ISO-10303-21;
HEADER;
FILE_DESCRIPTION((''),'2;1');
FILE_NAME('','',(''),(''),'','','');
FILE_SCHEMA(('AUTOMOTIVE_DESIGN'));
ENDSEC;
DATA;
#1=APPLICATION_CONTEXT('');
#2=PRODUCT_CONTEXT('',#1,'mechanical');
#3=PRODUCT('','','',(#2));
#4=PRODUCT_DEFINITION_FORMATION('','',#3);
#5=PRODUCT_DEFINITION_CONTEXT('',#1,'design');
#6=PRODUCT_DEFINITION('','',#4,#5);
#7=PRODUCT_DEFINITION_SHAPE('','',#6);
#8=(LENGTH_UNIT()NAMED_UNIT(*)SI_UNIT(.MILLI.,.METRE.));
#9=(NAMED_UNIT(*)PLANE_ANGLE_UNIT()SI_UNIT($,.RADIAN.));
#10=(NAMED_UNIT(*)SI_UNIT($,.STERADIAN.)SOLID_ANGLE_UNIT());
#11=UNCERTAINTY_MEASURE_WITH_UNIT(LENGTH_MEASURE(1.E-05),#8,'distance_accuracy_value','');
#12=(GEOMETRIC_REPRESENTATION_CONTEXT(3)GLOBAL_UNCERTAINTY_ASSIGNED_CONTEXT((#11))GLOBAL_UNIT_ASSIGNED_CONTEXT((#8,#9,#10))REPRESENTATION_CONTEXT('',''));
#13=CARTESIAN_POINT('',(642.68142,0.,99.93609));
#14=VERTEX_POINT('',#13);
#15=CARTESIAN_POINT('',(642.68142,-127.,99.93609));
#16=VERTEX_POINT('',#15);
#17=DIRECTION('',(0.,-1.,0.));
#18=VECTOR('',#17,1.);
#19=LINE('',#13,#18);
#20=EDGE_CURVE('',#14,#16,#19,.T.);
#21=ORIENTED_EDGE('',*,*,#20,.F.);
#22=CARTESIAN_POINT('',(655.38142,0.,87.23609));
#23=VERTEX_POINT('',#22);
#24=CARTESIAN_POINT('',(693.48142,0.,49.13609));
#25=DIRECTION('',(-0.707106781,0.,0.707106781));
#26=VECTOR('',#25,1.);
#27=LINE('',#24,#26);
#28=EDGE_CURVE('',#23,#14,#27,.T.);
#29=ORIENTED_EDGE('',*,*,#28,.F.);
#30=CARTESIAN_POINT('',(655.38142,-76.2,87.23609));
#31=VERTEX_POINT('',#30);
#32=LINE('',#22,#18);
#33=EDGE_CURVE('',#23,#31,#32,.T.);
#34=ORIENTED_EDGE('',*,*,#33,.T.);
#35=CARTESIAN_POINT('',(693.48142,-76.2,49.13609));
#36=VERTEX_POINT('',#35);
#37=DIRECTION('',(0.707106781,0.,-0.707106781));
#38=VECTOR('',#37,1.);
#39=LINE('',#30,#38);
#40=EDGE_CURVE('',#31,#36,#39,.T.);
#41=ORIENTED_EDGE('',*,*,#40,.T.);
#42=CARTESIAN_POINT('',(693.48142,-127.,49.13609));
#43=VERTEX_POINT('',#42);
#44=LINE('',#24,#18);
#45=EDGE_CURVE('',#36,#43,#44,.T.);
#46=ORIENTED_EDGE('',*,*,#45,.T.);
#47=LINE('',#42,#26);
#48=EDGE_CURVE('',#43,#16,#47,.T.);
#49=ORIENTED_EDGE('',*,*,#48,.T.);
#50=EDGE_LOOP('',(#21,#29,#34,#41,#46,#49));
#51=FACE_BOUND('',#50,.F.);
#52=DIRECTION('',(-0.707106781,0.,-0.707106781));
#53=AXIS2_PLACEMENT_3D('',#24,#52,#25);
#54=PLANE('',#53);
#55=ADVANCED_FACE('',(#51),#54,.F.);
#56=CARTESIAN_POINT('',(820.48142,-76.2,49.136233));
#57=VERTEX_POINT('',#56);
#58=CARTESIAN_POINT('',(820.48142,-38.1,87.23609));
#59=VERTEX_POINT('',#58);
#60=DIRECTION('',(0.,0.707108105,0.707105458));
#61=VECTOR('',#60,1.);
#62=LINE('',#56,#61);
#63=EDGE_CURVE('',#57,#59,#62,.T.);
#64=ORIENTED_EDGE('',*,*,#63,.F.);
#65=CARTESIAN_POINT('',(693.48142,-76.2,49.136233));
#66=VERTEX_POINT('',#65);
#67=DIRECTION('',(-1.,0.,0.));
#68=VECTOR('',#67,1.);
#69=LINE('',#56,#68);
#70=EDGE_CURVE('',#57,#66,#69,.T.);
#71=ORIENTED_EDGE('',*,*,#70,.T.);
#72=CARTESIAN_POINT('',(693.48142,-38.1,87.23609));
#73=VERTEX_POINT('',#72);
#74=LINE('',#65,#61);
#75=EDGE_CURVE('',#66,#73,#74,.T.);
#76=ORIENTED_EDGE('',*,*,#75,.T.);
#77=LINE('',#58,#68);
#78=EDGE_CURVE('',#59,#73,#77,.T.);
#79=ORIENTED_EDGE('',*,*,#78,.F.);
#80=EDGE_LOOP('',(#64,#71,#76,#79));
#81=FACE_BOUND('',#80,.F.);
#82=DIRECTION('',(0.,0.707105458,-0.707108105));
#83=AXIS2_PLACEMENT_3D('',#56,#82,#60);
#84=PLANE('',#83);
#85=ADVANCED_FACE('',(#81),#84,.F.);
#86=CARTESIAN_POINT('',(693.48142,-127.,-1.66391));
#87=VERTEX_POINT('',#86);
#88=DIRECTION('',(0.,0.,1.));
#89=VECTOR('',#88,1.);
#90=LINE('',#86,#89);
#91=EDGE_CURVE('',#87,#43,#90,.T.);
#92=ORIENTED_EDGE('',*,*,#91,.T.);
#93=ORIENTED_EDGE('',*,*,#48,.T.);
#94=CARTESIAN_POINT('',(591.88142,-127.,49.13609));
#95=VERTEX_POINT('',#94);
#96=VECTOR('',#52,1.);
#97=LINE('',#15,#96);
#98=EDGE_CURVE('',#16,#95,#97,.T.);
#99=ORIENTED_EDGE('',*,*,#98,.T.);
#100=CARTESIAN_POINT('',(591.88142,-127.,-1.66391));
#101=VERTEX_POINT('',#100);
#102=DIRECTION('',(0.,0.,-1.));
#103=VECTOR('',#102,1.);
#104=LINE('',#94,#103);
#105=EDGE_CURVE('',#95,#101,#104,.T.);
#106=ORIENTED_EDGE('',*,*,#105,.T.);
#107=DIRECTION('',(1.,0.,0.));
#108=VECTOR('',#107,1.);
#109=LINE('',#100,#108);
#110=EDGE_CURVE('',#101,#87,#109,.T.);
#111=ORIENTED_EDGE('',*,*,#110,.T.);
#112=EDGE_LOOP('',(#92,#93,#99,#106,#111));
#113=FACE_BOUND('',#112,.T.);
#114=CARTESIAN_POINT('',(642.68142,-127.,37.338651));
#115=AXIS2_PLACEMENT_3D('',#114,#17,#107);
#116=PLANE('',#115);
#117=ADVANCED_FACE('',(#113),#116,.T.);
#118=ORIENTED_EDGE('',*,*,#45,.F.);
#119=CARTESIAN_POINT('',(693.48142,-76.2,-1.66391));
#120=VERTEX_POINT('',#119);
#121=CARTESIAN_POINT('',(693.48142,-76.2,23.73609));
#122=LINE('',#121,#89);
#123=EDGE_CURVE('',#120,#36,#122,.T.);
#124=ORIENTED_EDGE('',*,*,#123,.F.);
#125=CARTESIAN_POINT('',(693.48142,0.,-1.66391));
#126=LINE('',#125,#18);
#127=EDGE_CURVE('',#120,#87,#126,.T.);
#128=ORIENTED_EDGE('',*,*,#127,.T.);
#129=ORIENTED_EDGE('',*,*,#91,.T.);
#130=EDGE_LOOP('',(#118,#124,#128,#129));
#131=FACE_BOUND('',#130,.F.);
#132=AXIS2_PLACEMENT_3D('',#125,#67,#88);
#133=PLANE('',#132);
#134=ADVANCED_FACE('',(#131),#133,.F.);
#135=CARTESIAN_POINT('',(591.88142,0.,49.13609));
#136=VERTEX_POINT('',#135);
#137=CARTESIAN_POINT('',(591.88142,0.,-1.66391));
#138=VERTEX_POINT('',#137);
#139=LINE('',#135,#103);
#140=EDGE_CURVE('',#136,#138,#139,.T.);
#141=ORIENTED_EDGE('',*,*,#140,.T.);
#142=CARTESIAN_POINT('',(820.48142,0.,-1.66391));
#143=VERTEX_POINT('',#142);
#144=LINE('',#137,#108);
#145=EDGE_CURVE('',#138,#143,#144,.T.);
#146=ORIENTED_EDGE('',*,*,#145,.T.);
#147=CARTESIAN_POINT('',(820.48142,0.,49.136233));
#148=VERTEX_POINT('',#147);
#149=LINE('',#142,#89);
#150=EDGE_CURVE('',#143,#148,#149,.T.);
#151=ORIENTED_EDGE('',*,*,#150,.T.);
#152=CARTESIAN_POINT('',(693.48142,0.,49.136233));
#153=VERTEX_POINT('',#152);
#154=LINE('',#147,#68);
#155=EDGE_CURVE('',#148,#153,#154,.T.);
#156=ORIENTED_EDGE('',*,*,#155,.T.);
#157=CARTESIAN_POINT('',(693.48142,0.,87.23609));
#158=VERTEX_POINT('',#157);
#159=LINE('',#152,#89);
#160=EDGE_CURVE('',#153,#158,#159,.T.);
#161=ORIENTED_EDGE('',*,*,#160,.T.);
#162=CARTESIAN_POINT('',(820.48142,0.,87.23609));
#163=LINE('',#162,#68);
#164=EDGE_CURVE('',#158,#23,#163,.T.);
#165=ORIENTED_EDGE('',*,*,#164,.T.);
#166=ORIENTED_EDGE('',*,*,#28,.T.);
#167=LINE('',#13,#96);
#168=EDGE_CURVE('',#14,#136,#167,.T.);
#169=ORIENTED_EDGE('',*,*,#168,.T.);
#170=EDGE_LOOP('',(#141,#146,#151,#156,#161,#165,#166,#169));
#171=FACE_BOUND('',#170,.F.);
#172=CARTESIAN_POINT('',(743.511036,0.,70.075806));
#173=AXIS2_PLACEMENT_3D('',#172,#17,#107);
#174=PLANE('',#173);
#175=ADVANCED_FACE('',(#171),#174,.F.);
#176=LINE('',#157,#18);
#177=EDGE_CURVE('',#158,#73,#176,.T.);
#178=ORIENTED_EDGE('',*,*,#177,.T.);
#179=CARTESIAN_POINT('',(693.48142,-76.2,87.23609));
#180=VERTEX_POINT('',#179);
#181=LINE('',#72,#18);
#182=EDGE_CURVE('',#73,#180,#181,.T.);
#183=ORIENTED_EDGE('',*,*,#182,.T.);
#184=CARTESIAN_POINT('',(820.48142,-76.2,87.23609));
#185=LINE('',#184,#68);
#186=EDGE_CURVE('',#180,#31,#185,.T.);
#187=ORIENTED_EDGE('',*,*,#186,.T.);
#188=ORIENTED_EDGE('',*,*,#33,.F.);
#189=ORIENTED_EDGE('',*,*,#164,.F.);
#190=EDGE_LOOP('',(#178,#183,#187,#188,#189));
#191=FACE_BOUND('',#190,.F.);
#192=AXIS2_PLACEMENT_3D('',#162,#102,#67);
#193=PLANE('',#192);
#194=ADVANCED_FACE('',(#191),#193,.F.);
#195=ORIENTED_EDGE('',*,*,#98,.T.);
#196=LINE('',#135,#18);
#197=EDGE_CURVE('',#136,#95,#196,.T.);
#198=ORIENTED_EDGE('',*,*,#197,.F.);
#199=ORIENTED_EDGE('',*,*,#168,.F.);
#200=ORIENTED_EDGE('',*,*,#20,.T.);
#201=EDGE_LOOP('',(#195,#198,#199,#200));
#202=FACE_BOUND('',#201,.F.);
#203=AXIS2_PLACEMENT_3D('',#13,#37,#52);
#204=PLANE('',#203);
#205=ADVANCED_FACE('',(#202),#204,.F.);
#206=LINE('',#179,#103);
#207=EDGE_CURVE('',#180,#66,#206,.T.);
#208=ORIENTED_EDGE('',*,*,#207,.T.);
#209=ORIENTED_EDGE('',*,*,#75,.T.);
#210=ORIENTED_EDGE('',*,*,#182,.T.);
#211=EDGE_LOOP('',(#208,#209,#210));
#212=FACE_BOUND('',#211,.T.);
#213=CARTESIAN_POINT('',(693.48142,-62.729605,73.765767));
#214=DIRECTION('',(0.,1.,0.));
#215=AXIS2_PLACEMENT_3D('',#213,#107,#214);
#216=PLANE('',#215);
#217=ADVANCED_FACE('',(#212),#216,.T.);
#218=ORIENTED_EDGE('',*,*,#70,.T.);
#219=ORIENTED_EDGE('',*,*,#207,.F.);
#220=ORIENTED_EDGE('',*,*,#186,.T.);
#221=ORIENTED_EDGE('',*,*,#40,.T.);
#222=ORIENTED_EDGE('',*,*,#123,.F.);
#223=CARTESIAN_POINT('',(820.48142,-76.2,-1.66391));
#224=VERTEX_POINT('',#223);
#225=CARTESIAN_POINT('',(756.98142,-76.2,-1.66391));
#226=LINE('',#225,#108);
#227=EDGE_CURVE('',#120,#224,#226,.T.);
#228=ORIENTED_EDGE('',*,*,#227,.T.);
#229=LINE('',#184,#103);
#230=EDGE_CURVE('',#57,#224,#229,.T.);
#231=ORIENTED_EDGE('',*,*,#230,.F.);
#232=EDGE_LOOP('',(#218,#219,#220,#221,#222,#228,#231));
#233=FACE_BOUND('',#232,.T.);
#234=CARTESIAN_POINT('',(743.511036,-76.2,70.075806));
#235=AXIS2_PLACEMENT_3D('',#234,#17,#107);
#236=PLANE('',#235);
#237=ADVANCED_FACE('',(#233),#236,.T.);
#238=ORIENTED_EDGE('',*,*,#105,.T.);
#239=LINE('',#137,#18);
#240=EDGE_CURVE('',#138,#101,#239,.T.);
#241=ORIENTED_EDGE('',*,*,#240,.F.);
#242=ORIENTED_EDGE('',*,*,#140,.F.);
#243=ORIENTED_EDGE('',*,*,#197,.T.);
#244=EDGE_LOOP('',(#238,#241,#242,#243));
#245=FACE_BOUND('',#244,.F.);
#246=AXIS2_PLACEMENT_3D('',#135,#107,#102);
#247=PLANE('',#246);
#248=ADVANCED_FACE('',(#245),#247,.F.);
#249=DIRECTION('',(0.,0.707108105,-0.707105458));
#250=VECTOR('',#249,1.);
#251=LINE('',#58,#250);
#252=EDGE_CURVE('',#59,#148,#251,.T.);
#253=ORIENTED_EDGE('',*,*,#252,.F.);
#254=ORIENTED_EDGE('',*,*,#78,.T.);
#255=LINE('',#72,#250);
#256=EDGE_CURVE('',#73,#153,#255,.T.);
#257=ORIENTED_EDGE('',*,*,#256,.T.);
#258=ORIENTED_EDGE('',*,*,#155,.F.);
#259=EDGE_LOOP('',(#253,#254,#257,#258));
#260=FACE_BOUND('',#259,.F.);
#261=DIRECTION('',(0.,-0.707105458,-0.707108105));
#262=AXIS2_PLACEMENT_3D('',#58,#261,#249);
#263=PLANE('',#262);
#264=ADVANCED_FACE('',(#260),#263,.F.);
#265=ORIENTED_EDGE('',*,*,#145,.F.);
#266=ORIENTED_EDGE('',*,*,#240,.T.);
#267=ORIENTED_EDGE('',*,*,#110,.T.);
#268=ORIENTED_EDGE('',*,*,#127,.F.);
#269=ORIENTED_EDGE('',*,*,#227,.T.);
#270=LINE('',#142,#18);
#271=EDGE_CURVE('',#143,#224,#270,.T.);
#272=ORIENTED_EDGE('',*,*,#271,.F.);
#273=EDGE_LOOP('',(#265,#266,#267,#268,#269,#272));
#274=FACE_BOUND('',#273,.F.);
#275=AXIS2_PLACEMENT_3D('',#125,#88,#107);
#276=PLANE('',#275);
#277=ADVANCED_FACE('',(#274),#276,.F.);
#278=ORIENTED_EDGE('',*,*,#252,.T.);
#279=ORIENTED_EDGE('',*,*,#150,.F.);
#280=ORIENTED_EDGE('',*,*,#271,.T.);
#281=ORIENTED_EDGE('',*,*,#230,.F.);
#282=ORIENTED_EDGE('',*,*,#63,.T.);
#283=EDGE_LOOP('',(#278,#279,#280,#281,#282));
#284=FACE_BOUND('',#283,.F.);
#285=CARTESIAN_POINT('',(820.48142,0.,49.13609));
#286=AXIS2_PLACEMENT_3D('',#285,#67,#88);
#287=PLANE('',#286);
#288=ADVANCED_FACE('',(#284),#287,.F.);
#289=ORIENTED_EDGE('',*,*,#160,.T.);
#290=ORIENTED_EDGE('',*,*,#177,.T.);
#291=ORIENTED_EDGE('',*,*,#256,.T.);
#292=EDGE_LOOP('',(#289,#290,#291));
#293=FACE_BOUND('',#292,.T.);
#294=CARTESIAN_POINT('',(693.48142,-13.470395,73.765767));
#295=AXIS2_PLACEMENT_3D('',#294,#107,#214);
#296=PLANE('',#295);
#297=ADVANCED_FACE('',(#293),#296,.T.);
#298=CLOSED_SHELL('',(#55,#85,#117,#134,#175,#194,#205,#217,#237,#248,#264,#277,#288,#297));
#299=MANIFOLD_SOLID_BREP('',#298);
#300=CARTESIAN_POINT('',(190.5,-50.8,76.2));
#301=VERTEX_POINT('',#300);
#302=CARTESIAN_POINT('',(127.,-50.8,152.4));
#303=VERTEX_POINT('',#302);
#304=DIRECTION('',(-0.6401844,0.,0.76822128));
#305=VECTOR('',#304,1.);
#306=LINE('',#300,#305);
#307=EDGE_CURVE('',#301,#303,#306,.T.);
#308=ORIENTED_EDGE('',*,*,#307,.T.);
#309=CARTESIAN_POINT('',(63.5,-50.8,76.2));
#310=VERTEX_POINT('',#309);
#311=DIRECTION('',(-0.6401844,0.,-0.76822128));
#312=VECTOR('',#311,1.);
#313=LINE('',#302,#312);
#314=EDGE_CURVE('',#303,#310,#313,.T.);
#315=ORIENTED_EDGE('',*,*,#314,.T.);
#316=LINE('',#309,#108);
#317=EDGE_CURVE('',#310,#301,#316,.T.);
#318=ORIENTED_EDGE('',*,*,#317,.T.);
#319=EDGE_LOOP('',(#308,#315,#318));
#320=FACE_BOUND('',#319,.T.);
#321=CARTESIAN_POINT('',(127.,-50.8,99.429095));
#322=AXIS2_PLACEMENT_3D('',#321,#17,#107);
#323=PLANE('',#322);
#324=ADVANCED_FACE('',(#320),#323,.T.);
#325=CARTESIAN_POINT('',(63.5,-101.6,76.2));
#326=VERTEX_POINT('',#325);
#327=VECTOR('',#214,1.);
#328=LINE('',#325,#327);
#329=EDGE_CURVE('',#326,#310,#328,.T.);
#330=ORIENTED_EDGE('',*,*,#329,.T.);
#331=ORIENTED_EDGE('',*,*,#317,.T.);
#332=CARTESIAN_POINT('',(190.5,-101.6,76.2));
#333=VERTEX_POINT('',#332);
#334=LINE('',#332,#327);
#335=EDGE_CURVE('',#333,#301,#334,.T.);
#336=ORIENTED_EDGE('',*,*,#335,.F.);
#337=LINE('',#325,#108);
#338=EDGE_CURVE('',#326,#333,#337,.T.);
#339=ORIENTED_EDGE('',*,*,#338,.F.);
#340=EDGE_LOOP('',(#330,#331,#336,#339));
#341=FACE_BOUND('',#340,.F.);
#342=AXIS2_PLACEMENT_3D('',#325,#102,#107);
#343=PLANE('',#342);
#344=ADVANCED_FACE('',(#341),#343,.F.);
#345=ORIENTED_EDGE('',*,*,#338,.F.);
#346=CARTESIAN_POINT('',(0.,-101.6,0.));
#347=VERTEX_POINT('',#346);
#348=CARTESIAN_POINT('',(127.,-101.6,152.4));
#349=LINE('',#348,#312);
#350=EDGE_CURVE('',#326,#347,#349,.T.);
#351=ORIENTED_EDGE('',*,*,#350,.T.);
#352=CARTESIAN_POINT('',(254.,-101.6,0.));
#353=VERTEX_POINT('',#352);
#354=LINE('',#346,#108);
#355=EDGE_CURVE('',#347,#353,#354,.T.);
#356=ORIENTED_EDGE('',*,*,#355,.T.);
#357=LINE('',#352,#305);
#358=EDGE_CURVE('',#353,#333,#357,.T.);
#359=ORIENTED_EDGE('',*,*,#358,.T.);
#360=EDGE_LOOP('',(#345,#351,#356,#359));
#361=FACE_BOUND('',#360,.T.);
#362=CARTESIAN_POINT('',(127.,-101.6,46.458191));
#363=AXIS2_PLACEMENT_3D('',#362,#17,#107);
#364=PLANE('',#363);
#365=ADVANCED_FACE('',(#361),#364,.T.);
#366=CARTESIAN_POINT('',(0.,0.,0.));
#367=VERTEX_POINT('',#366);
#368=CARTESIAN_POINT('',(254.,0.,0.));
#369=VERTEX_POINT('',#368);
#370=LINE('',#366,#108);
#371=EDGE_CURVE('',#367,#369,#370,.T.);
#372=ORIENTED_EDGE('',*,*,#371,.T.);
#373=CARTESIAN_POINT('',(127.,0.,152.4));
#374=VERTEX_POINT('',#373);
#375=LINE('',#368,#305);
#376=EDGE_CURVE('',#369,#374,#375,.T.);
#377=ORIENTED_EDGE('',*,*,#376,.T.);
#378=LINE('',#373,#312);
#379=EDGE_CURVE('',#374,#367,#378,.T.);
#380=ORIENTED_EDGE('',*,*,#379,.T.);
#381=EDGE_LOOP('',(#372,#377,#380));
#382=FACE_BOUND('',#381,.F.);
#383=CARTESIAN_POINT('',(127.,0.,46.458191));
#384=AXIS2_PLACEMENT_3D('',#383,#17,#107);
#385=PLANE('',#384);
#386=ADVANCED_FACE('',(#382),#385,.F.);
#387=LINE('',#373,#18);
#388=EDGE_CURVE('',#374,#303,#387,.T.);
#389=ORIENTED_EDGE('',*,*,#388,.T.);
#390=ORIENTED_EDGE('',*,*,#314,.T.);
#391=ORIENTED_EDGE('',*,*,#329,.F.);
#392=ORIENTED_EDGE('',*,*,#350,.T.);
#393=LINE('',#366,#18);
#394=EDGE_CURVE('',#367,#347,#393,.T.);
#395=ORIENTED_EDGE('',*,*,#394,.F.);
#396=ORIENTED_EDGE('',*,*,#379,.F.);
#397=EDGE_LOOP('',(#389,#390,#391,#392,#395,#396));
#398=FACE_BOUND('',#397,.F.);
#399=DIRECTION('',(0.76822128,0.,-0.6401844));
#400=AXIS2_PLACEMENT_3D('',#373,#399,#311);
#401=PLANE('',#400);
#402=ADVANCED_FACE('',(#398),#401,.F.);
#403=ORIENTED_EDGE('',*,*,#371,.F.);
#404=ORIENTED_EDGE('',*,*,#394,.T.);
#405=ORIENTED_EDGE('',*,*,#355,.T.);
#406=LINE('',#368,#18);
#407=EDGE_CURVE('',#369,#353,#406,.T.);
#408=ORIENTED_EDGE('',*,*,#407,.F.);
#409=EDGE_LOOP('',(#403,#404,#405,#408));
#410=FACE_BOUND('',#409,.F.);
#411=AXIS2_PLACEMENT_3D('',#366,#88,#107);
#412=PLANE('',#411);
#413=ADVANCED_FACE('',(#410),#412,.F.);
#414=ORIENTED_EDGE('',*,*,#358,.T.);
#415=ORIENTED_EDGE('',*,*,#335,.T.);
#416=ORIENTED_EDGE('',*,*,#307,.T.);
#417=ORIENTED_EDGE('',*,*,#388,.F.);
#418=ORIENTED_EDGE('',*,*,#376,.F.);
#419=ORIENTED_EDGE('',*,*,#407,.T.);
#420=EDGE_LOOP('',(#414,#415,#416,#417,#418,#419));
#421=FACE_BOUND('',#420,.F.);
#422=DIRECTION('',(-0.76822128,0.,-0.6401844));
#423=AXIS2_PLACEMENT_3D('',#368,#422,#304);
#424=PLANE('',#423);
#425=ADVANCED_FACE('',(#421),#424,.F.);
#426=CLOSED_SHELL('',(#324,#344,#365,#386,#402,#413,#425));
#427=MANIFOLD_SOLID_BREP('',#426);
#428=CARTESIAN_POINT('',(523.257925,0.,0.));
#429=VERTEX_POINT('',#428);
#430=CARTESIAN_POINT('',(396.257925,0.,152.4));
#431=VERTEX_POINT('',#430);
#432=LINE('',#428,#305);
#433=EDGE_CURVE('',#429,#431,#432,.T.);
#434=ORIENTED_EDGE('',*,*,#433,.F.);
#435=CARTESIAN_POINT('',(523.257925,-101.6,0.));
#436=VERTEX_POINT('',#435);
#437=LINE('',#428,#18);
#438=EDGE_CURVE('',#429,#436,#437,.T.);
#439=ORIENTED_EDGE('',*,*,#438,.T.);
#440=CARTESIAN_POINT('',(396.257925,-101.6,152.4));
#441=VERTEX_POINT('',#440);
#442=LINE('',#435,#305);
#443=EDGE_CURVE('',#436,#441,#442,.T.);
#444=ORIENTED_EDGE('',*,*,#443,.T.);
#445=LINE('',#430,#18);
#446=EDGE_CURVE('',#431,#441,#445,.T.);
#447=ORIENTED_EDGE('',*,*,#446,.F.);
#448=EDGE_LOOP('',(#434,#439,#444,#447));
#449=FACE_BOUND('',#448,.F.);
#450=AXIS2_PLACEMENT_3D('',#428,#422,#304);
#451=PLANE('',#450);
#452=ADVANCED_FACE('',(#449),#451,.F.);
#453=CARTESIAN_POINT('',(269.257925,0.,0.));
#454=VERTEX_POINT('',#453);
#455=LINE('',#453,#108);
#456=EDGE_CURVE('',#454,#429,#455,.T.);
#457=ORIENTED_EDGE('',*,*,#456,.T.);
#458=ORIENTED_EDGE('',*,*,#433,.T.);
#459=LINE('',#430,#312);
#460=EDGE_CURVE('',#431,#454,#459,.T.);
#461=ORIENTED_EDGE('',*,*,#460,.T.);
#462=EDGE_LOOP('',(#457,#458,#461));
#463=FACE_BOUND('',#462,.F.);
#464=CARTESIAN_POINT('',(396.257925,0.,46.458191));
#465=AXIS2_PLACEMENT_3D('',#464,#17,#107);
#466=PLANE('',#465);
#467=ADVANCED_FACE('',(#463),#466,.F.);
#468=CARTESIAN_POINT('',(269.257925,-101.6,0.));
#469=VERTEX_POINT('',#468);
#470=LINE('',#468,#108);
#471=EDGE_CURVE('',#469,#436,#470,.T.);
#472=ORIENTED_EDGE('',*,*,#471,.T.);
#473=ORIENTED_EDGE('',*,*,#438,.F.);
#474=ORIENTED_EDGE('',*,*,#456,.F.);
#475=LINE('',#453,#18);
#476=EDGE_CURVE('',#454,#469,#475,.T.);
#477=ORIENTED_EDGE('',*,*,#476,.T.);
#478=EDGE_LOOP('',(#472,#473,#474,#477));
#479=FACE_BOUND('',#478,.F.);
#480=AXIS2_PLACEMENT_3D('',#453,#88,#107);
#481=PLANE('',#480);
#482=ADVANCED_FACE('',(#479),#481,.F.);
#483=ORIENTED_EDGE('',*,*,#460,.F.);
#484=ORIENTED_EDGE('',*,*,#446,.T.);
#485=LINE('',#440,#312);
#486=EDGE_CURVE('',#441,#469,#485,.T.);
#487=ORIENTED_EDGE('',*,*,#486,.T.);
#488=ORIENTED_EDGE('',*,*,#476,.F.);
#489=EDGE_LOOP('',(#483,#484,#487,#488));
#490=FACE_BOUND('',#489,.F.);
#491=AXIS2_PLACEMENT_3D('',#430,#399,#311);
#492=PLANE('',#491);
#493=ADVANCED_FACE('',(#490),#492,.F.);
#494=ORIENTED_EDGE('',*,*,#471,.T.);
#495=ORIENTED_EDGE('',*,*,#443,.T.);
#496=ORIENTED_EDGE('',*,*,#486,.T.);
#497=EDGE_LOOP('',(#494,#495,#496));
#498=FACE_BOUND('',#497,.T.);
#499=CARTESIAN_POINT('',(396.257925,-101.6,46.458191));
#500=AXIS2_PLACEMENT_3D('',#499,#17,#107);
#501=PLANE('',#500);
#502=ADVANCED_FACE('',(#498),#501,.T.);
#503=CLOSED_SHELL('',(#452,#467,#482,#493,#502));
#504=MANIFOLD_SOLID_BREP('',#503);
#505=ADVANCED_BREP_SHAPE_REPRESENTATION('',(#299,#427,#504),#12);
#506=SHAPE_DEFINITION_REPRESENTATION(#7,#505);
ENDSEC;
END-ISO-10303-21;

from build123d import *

# Parameters (mm, degrees)
F1_DEPTH  = 101.6
F3_DEPTH  = 50.8
F5_DEPTH  = 101.6
F7_DEPTH  = 127
F6_W      = 127
F6_H      = 50.8
F8_DEPTH  = 76.2
F9_DEPTH  = 76.2
F11_DEPTH = 127
F13_DEPTH = 127


with BuildPart() as f1:
    # F0 (on Front) → F1 (new body)
    with BuildSketch(Plane.XZ):
        Polygon((127, 152.4), (0, 0), (254, 0), align=None)
    extrude(amount=F1_DEPTH)

    # F2 (on face) → F3 (cut)
    with BuildSketch(Plane.XZ.offset(101.6)):
        Polygon((63.5, 76.2), (127, 76.2), (190.5, 76.2), (127, 152.4), align=None)
    extrude(amount=-F3_DEPTH, mode=Mode.SUBTRACT)


with BuildPart() as f5:
    # F4 (on Front) → F5 (new body)
    with BuildSketch(Plane.XZ):
        Polygon((396.2579253727, 152.4), (269.2579253727, 0), (523.2579253727, 0), align=None)
    extrude(amount=F5_DEPTH)


with BuildPart() as f7:
    # F6 (on Front) → F7 (new body)
    with BuildSketch(Plane.XZ):
        Polygon((591.8814198494, 49.1360899748), (591.8814198494, -1.6639100252), (693.4814198494, -1.6639100252), (693.4814198494, 49.1360899748), (655.3814198494, 87.2360899748), (642.6814198494, 99.9360899748), align=None)
    extrude(amount=F7_DEPTH)

    # F6 (on Front) → F8 (join)
    with BuildSketch(Plane.XZ):
        with Locations((756.9814198494, 23.7360899748)):
            Rectangle(F6_W, F6_H)
    extrude(amount=F8_DEPTH)

    # F6 (on Front) → F9 (join)
    with BuildSketch(Plane.XZ):
        Polygon((655.3814198494, 87.2360899748), (693.4814198494, 49.1360899748), (820.4814198494, 49.1360899748), (820.4814198494, 87.2360899748), align=None)
    extrude(amount=F9_DEPTH)

    # F10 (on face) → F11 (cut)
    with BuildSketch(Plane.YZ.offset(820.4814198494)):
        Polygon((-76.2, 87.2360899748), (-76.2, 49.1362325847), (-38.1, 87.2360899748), align=None)
    extrude(amount=-F11_DEPTH, mode=Mode.SUBTRACT)

    # F12 (on face) → F13 (cut)
    with BuildSketch(Plane.YZ.offset(820.4814198494)):
        Polygon((0, 87.2360899748), (-38.1, 87.2360899748), (0, 49.1362325847), align=None)
    extrude(amount=-F13_DEPTH, mode=Mode.SUBTRACT)


solid = Compound([f1.part, f5.part, f7.part])
